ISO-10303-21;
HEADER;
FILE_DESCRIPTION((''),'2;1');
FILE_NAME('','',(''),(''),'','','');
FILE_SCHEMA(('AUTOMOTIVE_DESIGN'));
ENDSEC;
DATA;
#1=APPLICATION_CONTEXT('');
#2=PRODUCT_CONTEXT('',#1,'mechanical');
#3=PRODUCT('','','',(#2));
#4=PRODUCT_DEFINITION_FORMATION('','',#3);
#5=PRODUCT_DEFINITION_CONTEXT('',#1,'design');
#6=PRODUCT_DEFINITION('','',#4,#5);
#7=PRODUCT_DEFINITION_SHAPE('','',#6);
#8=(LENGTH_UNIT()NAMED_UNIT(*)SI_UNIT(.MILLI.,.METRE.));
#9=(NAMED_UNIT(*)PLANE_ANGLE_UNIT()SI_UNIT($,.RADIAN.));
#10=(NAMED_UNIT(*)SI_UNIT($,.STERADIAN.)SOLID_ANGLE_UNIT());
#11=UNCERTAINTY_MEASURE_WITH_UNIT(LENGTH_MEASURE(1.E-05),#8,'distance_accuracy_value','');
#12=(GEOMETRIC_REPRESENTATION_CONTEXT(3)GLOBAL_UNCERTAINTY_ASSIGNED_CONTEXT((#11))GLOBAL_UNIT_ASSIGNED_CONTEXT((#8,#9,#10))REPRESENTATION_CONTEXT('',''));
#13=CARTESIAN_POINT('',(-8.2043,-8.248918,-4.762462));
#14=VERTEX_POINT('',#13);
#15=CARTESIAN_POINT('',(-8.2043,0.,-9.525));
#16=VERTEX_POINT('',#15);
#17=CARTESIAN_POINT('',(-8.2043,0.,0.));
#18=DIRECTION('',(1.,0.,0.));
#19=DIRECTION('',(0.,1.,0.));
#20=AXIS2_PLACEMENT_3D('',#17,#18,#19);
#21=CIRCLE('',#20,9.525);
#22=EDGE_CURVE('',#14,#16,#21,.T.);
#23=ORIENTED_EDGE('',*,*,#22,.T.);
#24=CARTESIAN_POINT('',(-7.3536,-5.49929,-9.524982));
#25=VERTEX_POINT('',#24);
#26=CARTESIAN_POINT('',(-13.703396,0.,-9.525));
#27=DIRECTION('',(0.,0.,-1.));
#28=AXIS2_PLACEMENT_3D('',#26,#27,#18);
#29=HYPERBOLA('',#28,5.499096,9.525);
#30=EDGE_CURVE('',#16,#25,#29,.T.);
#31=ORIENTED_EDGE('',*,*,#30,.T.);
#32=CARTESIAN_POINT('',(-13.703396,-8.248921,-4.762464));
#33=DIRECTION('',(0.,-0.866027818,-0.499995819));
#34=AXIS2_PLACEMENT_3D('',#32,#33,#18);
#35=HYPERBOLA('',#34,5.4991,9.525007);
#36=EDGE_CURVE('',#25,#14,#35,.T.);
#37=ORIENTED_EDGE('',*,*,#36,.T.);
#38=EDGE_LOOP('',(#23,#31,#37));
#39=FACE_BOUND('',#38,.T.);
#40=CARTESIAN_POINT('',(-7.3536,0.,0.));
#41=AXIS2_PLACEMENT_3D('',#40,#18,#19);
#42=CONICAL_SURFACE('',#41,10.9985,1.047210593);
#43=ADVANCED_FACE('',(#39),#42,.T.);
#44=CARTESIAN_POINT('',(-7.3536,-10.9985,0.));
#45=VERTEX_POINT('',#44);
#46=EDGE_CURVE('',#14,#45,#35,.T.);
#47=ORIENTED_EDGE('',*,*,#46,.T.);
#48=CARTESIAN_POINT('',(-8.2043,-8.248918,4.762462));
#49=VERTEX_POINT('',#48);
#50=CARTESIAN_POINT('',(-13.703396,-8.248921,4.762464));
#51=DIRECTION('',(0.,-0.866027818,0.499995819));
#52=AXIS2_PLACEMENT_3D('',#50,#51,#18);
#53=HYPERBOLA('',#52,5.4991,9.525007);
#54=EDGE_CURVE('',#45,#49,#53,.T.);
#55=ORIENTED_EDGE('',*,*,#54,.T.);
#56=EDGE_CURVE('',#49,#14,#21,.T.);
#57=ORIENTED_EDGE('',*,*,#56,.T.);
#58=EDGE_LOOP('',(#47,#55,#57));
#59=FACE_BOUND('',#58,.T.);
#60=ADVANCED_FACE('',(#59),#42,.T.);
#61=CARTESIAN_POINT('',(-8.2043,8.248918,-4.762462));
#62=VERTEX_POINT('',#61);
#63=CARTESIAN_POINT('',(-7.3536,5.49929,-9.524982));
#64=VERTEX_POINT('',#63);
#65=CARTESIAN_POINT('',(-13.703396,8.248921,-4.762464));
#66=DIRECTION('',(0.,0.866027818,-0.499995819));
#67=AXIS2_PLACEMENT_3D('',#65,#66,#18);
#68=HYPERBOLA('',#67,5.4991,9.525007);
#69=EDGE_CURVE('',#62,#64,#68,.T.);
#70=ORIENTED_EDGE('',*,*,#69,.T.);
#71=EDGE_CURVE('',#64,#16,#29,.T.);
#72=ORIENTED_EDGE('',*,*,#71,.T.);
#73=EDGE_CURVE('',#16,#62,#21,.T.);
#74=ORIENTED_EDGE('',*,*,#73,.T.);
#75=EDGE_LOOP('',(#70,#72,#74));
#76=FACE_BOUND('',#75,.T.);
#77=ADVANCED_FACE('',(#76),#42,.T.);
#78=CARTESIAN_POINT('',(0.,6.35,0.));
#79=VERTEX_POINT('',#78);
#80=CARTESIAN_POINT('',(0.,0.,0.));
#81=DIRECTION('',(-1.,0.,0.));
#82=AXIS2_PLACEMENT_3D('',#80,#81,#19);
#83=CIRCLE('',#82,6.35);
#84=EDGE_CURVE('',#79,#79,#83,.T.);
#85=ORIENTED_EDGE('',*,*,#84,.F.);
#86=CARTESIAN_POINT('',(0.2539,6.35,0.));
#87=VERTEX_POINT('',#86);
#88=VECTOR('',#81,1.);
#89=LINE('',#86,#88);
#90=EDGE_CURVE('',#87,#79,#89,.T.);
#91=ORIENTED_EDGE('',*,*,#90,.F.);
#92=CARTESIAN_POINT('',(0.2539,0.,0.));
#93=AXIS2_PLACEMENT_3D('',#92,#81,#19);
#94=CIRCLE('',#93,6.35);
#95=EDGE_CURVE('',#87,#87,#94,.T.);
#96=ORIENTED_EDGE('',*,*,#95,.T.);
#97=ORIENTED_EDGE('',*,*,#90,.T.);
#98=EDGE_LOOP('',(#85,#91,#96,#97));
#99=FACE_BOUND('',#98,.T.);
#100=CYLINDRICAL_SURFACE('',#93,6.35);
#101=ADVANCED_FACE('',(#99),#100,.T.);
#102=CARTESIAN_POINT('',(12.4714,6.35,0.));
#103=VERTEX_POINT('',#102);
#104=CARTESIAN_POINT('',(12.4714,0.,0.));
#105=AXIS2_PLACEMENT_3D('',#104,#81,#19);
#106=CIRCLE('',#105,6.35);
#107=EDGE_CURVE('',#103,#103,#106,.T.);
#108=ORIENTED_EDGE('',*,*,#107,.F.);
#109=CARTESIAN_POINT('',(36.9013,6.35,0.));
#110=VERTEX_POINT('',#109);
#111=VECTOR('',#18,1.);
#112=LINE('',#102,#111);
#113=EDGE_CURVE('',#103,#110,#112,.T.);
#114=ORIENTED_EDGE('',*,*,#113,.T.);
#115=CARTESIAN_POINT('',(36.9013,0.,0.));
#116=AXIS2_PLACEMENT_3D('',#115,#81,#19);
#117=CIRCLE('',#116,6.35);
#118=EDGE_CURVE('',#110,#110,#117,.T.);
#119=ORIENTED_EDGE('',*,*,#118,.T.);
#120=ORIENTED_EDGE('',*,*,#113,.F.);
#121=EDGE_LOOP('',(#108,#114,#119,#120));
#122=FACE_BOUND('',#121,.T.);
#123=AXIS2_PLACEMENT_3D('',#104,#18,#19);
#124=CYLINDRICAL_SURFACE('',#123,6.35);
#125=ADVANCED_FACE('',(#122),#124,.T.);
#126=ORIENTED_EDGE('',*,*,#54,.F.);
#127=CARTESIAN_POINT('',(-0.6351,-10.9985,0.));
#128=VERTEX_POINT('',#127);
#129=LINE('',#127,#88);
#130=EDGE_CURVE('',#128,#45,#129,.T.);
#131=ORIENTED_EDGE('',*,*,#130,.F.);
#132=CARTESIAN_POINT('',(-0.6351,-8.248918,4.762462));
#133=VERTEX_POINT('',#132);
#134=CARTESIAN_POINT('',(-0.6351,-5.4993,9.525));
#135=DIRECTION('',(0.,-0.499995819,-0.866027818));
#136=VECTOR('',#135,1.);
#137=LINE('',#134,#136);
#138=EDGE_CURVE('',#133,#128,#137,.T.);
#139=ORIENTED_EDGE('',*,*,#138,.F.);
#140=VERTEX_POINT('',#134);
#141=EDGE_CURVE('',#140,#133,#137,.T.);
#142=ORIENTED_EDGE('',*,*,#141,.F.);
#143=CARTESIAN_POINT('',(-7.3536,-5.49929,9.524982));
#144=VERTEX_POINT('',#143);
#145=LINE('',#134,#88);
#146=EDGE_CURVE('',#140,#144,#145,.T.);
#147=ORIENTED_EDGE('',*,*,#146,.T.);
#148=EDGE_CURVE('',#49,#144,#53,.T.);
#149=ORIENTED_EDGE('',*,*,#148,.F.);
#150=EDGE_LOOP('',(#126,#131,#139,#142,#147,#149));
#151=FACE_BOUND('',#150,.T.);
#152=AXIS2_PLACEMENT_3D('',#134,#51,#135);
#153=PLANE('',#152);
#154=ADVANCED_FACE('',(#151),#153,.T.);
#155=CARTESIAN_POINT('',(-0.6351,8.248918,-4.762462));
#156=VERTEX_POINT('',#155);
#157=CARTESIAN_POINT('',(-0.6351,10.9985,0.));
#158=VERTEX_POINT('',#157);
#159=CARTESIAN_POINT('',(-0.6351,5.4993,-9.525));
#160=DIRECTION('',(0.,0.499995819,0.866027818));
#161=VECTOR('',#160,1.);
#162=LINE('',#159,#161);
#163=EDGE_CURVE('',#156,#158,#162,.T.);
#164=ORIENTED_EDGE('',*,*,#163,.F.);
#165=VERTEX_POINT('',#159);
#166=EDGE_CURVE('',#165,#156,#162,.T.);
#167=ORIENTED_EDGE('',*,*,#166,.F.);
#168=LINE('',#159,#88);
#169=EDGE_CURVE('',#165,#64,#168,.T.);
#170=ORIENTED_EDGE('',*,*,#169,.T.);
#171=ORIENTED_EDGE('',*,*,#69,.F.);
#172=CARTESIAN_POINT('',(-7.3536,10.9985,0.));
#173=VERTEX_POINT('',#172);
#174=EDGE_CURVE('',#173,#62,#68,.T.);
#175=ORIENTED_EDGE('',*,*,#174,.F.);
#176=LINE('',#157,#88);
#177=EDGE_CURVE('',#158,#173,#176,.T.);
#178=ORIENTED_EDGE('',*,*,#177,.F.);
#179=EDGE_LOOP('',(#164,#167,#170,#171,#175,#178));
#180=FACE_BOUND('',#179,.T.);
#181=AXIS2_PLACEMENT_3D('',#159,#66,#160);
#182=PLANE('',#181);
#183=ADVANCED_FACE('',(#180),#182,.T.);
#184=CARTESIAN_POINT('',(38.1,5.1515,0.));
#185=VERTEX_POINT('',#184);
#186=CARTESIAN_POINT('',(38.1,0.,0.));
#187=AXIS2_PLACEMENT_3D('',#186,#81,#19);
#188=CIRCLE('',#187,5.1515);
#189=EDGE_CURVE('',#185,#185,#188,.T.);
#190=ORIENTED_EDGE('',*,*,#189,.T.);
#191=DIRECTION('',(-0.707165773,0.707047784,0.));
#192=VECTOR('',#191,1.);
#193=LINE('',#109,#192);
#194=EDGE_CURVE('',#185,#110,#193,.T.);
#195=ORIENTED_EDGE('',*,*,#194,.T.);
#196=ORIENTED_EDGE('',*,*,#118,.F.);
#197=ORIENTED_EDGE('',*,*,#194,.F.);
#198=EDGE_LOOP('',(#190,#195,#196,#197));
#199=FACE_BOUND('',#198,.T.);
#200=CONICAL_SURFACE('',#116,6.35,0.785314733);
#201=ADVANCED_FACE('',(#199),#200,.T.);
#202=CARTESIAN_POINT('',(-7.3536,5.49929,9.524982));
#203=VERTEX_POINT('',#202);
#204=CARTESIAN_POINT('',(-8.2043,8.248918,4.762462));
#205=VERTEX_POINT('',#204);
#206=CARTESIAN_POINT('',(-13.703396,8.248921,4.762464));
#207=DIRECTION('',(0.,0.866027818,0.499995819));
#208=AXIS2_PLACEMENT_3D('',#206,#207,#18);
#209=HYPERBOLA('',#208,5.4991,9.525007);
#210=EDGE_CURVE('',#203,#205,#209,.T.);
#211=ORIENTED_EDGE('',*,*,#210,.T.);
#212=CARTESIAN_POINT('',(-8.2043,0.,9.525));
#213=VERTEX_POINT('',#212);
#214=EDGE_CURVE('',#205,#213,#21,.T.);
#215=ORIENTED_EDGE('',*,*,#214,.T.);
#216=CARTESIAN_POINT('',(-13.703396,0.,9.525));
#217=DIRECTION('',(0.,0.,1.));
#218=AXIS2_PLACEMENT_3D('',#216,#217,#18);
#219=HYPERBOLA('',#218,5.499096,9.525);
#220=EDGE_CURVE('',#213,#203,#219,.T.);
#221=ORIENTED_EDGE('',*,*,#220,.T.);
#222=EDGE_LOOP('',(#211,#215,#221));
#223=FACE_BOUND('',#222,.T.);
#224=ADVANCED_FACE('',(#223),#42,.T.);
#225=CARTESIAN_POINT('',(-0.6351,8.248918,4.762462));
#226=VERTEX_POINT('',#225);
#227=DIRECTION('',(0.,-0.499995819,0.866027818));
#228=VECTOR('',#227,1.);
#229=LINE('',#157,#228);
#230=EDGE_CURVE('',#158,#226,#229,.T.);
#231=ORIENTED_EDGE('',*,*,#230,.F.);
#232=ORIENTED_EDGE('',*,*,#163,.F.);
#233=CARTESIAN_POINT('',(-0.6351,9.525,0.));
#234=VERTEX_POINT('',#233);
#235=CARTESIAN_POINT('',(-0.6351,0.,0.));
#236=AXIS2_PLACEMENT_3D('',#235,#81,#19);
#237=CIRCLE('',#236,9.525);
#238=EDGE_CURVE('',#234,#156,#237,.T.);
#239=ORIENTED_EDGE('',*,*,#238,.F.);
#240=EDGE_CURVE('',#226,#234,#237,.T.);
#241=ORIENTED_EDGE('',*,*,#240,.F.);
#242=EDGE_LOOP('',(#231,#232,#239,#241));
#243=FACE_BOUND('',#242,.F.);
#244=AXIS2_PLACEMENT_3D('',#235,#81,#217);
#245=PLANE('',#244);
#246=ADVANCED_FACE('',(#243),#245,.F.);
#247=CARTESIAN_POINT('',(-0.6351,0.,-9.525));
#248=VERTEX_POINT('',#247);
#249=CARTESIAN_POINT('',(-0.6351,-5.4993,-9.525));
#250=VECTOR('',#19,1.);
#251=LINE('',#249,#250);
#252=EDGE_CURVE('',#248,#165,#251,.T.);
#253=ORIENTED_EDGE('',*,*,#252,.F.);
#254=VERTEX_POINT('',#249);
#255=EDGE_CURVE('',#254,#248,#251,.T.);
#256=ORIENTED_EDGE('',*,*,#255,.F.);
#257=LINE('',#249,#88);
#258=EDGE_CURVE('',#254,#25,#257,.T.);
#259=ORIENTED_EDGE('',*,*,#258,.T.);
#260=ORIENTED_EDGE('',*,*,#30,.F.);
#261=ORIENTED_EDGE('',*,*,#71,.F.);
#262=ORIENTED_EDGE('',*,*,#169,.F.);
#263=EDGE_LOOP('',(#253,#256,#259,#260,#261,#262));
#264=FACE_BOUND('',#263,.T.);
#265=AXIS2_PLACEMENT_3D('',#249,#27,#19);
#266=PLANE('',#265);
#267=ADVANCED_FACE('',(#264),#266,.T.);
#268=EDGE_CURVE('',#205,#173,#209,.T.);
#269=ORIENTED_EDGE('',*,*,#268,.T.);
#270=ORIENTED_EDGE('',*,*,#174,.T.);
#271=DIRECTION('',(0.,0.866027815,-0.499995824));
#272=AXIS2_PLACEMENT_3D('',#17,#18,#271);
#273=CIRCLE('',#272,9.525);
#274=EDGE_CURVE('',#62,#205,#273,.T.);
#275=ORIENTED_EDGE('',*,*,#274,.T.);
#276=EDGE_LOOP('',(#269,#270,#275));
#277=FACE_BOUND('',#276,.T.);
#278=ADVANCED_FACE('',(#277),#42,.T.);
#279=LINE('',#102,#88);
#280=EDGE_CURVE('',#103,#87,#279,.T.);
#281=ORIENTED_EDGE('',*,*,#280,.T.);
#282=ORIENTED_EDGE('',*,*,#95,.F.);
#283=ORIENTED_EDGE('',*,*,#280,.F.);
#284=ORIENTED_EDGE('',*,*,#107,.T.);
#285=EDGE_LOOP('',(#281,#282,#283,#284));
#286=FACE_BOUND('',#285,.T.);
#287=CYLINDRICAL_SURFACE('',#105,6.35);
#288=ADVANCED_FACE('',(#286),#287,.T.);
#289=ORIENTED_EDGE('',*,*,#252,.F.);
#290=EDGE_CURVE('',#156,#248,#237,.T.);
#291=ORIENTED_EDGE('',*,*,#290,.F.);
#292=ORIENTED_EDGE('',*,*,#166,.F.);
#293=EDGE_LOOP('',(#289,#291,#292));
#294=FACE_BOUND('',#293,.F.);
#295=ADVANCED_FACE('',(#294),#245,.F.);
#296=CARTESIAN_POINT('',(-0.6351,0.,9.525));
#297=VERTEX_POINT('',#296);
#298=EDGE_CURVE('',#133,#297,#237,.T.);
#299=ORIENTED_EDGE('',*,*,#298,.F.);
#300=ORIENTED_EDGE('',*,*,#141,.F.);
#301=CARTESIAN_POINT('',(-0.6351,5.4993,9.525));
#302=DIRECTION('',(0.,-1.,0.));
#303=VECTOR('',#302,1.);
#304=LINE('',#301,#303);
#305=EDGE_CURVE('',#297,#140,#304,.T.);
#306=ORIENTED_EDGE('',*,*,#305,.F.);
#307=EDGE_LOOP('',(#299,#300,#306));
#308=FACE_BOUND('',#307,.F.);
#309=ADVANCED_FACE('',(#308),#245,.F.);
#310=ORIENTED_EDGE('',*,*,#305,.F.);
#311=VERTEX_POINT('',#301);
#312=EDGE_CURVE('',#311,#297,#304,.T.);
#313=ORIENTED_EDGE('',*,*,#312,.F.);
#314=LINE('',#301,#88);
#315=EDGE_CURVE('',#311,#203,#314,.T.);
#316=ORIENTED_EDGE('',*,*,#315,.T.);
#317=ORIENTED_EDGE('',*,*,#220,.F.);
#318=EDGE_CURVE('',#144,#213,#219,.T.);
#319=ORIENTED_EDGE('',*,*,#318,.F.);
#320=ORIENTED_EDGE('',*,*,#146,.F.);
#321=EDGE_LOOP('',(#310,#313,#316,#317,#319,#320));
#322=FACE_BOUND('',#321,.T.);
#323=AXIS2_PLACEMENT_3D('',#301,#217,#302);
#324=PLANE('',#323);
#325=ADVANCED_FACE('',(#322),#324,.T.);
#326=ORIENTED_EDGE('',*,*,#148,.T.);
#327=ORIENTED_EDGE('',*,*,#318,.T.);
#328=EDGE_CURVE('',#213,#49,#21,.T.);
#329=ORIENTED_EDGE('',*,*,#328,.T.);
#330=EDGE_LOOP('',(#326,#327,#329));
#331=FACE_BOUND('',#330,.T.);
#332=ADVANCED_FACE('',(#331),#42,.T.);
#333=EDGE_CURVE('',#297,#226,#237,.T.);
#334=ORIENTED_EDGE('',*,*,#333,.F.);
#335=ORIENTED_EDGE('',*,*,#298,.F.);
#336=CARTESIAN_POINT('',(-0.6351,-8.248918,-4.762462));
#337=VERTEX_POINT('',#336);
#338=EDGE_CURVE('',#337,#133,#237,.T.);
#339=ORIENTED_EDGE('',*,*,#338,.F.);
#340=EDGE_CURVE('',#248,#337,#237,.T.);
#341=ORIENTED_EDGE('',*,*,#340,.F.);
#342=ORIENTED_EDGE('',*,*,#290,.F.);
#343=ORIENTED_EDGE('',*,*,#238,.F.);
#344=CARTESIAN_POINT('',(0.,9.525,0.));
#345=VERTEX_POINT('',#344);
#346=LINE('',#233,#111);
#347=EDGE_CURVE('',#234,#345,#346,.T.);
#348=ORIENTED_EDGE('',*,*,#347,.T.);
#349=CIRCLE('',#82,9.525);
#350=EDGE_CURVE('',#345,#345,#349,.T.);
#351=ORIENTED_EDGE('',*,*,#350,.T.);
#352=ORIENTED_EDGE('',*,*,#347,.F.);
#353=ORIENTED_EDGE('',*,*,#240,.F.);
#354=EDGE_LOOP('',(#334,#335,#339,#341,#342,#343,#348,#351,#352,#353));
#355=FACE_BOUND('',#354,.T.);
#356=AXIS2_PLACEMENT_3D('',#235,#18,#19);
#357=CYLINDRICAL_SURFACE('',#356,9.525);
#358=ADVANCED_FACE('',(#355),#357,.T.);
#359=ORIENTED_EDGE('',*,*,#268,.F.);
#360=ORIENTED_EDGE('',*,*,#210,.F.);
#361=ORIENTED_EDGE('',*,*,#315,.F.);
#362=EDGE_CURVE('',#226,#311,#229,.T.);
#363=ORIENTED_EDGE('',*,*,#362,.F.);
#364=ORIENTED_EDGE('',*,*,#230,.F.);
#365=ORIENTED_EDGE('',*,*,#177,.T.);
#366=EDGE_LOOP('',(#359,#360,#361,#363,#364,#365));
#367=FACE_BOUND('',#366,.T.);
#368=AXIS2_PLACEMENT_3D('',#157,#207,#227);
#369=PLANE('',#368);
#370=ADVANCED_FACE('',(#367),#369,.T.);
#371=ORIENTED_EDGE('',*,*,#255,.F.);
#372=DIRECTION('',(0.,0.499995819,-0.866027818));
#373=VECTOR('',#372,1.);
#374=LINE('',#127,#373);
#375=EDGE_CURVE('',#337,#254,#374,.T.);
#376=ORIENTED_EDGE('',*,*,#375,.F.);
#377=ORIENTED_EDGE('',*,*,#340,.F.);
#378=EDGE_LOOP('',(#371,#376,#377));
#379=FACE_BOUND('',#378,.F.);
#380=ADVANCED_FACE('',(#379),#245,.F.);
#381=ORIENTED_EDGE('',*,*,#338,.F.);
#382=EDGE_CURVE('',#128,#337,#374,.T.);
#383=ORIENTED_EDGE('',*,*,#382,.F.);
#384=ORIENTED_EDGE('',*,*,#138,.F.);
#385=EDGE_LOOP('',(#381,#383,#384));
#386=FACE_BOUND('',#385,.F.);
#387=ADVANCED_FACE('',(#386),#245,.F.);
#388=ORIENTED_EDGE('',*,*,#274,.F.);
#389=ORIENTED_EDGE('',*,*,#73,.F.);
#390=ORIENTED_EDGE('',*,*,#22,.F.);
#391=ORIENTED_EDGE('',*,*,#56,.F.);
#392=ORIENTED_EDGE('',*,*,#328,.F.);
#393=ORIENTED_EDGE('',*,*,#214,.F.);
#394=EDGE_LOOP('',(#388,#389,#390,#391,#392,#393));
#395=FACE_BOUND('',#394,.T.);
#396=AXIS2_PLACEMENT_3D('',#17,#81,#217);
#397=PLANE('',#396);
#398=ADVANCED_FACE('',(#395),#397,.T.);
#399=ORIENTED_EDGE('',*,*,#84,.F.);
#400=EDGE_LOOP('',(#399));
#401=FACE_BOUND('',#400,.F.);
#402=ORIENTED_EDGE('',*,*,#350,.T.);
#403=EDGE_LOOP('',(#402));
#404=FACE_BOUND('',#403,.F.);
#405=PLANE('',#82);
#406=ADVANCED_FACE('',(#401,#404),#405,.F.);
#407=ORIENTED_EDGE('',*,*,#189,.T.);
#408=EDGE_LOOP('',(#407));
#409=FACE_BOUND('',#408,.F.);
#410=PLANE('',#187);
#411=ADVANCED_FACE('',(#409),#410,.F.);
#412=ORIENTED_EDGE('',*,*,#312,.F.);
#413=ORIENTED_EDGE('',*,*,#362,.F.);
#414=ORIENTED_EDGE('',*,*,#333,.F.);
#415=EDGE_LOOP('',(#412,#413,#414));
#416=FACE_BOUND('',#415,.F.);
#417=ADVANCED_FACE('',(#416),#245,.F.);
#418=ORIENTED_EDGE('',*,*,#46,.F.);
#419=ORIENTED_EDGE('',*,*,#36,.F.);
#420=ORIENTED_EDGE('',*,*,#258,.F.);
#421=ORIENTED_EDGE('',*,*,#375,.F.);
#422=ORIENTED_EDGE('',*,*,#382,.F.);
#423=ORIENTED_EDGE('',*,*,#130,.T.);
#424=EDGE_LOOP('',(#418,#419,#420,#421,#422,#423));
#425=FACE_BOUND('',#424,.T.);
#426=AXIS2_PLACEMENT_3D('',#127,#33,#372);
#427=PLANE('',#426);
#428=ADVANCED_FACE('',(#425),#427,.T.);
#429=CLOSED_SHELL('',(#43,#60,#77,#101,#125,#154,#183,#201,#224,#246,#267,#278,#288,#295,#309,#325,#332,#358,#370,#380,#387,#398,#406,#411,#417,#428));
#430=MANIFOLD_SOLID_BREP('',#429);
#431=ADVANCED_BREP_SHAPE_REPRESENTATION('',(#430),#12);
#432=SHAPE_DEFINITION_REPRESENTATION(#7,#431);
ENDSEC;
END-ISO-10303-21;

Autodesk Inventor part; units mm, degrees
ref_plane "YZ Plane" through (0, 0, 0) normal (1, 0, 0) x (0, 1, 0)
ref_plane "XZ Plane" through (0, 0, 0) normal (0, 1, 0) x (-1, 0, 0)
sketch "Sketch1" plane through (0, 0, 0) normal (0, 0, 1) x (1, 0, 0)
  line L0 (0, 9.525) -> (0, 6.35)
  line L1 (12.4714, 6.35) -> (38.1, 6.35)
  line L2 (38.1, 6.35) -> (38.1, 0)
  line L3 (38.1, 0) -> (-0.6351, 0)
  line L4 (-8.3821, 0) -> (45.847, 0) projected
  line L5 (-0.6351, 0) -> (-0.6351, 9.525)
  line L6 (-0.6351, 9.525) -> (0, 9.525)
  line L7 (12.4714, 6.35) -> (0.2539, 6.35)
  line L8 (0.2539, 6.35) -> (0, 6.35)
  line L9 (0, -1.905) -> (0, 11.43) projected
  dimension "d0" = 38.1
  dimension "d1" = 25.6286
  dimension "d2" = 12.7
  dimension "d9" = 0.6351
  dimension "d10" = 19.05
  dimension "d13" = 12.2175
  dimension "d14" = 12.7
revolve "Body" add sketch "Sketch1" angle 360 about axis through (38.1, 0, 0) along (-1, 0, 0)
sketch "Sketch2" plane through (-0.6351, 0, 0) normal (-1, 0, 0) x (0, 0, 1)
  line L0 (0, 10.9985) -> (9.525, 5.4993)
  line L1 (9.525, 5.4993) -> (9.525, -5.4993)
  line L2 (9.525, -5.4993) -> (0, -10.9985)
  line L3 (0, -10.9985) -> (-9.525, -5.4993)
  line L4 (-9.525, -5.4993) -> (-9.525, 5.4993)
  line L5 (-9.525, 5.4993) -> (0, 10.9985)
  point P0 (0, 0)
  point P1 (0, 0)
  dimension "d11" = 19.05
extrude "Head" add sketch "Sketch2" along normal blind 7.5692
sketch "Sketch4" plane through (0, 0, 0) normal (0, 0, 1) x (1, 0, 0)
  line L0 (-8.2043, 9.525) -> (-8.2043, 10.9985)
  line L1 (-8.2043, 10.9985) -> (-7.3536, 10.9985)
  line L2 (-7.3536, 10.9985) -> (-8.2043, 9.525)
  line L3 (-9.7181, 0) -> (0.8787, 0) projected
  line L4 (-0.6351, 10.9985) -> (-8.2043, 10.9985) projected
  line L5 (-8.2043, 5.4993) -> (-8.2043, 10.9985) projected
  dimension "d5" = 30
  dimension "d19" = 19.05
revolve "Chamfer1" cut sketch "Sketch4" angle 360 about axis through (-10, 0, 0) along (1, 0, 0)
thread "Thread" size "1/2-13 UNC" class "2A" standard "ANSI Unified Screw Threads" length 25.6286
chamfer "Chamfer2" distance 1.1985 distance2 1.1987 1 edges at (38.1, -6.35, 0) measured on face at (38.1, 1.8742, -0.9837)
ref_plane "Work Plane1" through (1.525, 0, 0) normal (0, 0, 1) x (1, 0, 0)
equation "\"d0\" = NLG"
equation "\"d1\" = GEL"
equation "\"d2\" = GD"
equation "\"d10\" = SD2"
equation "\"d14\" = BDM"
equation "\"d11\" = SW"
equation "\"d3\" = KOH - SD"
equation "\"d5\" = ANG1"
equation "\"d19\" = SW0"
equation "\"d15\" = GEL"
equation "\"d6\" = -0.5 * SPD + 0.5 * GD"
equation "\"NLG\" = 38.1"
equation "\"GD\" = 12.7"
equation "\"BDM\" = 12.7"
equation "\"KOH\" = 8.2042"
equation "\"GEL\" = 25.6286"
equation "\"SW\" = 19.05"
equation "\"SW0\" = SW"
equation "\"SPD\" = GD1"
equation "\"SD2\" = SW"
equation "\"SD\" = 0.635"
equation "\"ANG1\" = 30deg"
equation "\"GAL\" = 12.2174"
equation "\"GUL\" = 1.19863"
equation "\"RR\" = 0.381"
equation "\"WFT\" = SD"
equation "\"GD1\" = 10.303"
equation "\"THREADDIA\" = 12.7"
equation "\"SDH\" = SW"
equation "\"SDHG\" = 0.254"
equation "\"TOA\" = 30deg"
equation "\"FAWI\" = 45deg"
equation "\"NND\" = 12.7"
equation "\"E0\" = 22.00275"
properties part number "AS 2465 - 1/2 x 1 1/2  UNC" material "Steel, Mild"
